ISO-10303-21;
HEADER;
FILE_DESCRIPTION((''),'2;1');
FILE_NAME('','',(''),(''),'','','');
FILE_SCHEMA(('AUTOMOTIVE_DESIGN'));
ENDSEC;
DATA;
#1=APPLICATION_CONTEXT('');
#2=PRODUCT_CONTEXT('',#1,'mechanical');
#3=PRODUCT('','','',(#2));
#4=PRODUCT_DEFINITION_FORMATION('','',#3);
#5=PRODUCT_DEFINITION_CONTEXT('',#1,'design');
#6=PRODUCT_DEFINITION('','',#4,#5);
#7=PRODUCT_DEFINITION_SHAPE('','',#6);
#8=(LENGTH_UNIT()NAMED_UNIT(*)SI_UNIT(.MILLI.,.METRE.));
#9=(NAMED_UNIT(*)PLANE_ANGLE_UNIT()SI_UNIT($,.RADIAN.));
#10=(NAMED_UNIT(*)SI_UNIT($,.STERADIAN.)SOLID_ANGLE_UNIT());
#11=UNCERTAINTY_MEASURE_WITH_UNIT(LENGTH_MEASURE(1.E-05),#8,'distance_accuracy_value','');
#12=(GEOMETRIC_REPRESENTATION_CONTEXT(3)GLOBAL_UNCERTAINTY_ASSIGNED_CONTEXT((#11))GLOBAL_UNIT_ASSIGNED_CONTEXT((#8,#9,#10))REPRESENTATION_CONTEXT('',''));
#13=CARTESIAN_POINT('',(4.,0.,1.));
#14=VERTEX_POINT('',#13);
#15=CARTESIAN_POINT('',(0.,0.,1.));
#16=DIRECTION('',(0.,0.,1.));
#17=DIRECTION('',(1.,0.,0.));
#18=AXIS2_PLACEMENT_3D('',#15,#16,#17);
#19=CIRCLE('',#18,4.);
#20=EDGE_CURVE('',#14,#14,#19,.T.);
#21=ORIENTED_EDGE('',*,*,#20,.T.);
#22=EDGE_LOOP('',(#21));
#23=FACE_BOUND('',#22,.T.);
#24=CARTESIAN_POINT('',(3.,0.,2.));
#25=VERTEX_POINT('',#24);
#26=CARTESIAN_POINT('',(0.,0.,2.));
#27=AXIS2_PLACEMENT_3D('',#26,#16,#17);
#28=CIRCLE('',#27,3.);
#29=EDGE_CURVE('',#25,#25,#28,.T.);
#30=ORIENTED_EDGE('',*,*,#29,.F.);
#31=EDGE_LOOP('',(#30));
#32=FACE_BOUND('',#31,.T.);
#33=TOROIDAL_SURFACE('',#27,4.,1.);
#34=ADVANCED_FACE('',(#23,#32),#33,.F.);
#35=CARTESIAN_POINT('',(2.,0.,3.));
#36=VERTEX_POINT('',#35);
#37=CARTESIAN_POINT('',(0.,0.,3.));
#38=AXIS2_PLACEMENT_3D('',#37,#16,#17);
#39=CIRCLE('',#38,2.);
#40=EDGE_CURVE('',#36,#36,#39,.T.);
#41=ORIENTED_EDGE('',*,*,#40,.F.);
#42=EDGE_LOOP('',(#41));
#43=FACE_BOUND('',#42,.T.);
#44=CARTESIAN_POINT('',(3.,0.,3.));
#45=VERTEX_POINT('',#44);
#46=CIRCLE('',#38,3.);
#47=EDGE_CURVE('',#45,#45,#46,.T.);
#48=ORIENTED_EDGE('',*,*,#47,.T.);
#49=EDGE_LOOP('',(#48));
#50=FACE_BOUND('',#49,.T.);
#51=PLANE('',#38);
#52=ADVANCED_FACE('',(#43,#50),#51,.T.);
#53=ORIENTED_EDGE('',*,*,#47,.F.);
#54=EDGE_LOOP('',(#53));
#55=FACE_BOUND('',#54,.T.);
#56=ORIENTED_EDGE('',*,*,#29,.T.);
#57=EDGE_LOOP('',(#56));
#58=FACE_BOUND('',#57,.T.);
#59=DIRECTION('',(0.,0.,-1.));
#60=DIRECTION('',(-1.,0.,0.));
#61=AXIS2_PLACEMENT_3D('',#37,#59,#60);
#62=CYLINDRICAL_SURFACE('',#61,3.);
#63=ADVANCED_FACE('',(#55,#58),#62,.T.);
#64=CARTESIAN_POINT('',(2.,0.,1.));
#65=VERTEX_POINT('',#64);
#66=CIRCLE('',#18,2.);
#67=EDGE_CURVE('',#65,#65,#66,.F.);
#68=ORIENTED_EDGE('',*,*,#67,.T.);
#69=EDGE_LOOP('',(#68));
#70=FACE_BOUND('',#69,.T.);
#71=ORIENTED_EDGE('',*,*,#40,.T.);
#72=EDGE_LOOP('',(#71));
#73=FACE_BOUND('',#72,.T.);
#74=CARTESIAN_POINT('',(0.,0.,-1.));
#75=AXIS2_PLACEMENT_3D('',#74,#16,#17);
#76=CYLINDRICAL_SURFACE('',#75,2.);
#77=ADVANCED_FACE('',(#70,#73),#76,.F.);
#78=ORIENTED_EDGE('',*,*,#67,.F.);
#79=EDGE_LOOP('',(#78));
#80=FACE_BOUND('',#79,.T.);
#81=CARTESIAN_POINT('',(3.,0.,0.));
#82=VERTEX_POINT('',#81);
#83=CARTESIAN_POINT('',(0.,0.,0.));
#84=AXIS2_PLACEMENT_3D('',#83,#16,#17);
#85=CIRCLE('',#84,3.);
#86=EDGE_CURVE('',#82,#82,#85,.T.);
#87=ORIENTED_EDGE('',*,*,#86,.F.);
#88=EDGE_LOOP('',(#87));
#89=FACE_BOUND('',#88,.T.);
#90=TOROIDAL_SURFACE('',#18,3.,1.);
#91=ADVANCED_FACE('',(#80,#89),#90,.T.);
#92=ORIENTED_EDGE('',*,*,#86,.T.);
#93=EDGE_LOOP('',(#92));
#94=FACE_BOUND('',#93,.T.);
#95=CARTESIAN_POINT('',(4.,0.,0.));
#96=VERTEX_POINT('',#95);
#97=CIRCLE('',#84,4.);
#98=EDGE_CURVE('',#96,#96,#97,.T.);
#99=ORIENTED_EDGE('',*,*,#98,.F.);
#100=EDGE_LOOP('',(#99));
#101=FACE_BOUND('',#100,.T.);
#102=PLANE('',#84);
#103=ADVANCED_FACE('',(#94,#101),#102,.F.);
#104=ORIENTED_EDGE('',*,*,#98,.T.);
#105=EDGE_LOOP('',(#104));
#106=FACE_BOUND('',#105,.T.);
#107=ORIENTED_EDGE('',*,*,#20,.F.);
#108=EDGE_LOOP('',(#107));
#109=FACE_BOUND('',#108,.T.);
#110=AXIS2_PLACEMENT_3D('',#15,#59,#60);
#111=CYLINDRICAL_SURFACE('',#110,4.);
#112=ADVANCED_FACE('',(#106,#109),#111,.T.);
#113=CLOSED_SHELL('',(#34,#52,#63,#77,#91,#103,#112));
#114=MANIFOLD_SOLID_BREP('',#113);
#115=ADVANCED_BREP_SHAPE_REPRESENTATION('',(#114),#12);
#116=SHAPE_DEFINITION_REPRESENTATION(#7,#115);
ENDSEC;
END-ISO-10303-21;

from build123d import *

# Parameters (mm, degrees)
SKETCH1_R           = 4
BOSS_EXTRUDE1_DEPTH = 1
SKETCH2_R           = 3
BOSS_EXTRUDE2_DEPTH = 2
FILLET1_R           = 1
SKETCH3_R           = 2
CUT_EXTRUDE1_DEPTH  = 4
FILLET2_R           = 1


with BuildPart() as part:
    # Sketch1 → Boss-Extrude1 (new body)
    with BuildSketch(Plane.XY):
        Circle(SKETCH1_R)
    extrude(amount=BOSS_EXTRUDE1_DEPTH)

    # Sketch2 → Boss-Extrude2 (add)
    with BuildSketch(Plane.XY.offset(1)):
        Circle(SKETCH2_R)
    extrude(amount=BOSS_EXTRUDE2_DEPTH)

    # Fillet1
    fillet1_edges = [part.edges().sort_by_distance(p)[0] for p in [
        (-3, 0, 1),
    ]]
    fillet(fillet1_edges, radius=FILLET1_R - 0.0001)  # a hair under: the kernel refuses the full size

    # Sketch3 → Cut-Extrude1 (cut)
    with BuildSketch(Plane.XY.offset(3)):
        Circle(SKETCH3_R)
    extrude(amount=-CUT_EXTRUDE1_DEPTH, mode=Mode.SUBTRACT)

    # Fillet2
    fillet2_edges = [part.edges().sort_by_distance(p)[0] for p in [
        (-2, 0, 0),
    ]]
    fillet(fillet2_edges, radius=FILLET2_R)


solid = part.part
